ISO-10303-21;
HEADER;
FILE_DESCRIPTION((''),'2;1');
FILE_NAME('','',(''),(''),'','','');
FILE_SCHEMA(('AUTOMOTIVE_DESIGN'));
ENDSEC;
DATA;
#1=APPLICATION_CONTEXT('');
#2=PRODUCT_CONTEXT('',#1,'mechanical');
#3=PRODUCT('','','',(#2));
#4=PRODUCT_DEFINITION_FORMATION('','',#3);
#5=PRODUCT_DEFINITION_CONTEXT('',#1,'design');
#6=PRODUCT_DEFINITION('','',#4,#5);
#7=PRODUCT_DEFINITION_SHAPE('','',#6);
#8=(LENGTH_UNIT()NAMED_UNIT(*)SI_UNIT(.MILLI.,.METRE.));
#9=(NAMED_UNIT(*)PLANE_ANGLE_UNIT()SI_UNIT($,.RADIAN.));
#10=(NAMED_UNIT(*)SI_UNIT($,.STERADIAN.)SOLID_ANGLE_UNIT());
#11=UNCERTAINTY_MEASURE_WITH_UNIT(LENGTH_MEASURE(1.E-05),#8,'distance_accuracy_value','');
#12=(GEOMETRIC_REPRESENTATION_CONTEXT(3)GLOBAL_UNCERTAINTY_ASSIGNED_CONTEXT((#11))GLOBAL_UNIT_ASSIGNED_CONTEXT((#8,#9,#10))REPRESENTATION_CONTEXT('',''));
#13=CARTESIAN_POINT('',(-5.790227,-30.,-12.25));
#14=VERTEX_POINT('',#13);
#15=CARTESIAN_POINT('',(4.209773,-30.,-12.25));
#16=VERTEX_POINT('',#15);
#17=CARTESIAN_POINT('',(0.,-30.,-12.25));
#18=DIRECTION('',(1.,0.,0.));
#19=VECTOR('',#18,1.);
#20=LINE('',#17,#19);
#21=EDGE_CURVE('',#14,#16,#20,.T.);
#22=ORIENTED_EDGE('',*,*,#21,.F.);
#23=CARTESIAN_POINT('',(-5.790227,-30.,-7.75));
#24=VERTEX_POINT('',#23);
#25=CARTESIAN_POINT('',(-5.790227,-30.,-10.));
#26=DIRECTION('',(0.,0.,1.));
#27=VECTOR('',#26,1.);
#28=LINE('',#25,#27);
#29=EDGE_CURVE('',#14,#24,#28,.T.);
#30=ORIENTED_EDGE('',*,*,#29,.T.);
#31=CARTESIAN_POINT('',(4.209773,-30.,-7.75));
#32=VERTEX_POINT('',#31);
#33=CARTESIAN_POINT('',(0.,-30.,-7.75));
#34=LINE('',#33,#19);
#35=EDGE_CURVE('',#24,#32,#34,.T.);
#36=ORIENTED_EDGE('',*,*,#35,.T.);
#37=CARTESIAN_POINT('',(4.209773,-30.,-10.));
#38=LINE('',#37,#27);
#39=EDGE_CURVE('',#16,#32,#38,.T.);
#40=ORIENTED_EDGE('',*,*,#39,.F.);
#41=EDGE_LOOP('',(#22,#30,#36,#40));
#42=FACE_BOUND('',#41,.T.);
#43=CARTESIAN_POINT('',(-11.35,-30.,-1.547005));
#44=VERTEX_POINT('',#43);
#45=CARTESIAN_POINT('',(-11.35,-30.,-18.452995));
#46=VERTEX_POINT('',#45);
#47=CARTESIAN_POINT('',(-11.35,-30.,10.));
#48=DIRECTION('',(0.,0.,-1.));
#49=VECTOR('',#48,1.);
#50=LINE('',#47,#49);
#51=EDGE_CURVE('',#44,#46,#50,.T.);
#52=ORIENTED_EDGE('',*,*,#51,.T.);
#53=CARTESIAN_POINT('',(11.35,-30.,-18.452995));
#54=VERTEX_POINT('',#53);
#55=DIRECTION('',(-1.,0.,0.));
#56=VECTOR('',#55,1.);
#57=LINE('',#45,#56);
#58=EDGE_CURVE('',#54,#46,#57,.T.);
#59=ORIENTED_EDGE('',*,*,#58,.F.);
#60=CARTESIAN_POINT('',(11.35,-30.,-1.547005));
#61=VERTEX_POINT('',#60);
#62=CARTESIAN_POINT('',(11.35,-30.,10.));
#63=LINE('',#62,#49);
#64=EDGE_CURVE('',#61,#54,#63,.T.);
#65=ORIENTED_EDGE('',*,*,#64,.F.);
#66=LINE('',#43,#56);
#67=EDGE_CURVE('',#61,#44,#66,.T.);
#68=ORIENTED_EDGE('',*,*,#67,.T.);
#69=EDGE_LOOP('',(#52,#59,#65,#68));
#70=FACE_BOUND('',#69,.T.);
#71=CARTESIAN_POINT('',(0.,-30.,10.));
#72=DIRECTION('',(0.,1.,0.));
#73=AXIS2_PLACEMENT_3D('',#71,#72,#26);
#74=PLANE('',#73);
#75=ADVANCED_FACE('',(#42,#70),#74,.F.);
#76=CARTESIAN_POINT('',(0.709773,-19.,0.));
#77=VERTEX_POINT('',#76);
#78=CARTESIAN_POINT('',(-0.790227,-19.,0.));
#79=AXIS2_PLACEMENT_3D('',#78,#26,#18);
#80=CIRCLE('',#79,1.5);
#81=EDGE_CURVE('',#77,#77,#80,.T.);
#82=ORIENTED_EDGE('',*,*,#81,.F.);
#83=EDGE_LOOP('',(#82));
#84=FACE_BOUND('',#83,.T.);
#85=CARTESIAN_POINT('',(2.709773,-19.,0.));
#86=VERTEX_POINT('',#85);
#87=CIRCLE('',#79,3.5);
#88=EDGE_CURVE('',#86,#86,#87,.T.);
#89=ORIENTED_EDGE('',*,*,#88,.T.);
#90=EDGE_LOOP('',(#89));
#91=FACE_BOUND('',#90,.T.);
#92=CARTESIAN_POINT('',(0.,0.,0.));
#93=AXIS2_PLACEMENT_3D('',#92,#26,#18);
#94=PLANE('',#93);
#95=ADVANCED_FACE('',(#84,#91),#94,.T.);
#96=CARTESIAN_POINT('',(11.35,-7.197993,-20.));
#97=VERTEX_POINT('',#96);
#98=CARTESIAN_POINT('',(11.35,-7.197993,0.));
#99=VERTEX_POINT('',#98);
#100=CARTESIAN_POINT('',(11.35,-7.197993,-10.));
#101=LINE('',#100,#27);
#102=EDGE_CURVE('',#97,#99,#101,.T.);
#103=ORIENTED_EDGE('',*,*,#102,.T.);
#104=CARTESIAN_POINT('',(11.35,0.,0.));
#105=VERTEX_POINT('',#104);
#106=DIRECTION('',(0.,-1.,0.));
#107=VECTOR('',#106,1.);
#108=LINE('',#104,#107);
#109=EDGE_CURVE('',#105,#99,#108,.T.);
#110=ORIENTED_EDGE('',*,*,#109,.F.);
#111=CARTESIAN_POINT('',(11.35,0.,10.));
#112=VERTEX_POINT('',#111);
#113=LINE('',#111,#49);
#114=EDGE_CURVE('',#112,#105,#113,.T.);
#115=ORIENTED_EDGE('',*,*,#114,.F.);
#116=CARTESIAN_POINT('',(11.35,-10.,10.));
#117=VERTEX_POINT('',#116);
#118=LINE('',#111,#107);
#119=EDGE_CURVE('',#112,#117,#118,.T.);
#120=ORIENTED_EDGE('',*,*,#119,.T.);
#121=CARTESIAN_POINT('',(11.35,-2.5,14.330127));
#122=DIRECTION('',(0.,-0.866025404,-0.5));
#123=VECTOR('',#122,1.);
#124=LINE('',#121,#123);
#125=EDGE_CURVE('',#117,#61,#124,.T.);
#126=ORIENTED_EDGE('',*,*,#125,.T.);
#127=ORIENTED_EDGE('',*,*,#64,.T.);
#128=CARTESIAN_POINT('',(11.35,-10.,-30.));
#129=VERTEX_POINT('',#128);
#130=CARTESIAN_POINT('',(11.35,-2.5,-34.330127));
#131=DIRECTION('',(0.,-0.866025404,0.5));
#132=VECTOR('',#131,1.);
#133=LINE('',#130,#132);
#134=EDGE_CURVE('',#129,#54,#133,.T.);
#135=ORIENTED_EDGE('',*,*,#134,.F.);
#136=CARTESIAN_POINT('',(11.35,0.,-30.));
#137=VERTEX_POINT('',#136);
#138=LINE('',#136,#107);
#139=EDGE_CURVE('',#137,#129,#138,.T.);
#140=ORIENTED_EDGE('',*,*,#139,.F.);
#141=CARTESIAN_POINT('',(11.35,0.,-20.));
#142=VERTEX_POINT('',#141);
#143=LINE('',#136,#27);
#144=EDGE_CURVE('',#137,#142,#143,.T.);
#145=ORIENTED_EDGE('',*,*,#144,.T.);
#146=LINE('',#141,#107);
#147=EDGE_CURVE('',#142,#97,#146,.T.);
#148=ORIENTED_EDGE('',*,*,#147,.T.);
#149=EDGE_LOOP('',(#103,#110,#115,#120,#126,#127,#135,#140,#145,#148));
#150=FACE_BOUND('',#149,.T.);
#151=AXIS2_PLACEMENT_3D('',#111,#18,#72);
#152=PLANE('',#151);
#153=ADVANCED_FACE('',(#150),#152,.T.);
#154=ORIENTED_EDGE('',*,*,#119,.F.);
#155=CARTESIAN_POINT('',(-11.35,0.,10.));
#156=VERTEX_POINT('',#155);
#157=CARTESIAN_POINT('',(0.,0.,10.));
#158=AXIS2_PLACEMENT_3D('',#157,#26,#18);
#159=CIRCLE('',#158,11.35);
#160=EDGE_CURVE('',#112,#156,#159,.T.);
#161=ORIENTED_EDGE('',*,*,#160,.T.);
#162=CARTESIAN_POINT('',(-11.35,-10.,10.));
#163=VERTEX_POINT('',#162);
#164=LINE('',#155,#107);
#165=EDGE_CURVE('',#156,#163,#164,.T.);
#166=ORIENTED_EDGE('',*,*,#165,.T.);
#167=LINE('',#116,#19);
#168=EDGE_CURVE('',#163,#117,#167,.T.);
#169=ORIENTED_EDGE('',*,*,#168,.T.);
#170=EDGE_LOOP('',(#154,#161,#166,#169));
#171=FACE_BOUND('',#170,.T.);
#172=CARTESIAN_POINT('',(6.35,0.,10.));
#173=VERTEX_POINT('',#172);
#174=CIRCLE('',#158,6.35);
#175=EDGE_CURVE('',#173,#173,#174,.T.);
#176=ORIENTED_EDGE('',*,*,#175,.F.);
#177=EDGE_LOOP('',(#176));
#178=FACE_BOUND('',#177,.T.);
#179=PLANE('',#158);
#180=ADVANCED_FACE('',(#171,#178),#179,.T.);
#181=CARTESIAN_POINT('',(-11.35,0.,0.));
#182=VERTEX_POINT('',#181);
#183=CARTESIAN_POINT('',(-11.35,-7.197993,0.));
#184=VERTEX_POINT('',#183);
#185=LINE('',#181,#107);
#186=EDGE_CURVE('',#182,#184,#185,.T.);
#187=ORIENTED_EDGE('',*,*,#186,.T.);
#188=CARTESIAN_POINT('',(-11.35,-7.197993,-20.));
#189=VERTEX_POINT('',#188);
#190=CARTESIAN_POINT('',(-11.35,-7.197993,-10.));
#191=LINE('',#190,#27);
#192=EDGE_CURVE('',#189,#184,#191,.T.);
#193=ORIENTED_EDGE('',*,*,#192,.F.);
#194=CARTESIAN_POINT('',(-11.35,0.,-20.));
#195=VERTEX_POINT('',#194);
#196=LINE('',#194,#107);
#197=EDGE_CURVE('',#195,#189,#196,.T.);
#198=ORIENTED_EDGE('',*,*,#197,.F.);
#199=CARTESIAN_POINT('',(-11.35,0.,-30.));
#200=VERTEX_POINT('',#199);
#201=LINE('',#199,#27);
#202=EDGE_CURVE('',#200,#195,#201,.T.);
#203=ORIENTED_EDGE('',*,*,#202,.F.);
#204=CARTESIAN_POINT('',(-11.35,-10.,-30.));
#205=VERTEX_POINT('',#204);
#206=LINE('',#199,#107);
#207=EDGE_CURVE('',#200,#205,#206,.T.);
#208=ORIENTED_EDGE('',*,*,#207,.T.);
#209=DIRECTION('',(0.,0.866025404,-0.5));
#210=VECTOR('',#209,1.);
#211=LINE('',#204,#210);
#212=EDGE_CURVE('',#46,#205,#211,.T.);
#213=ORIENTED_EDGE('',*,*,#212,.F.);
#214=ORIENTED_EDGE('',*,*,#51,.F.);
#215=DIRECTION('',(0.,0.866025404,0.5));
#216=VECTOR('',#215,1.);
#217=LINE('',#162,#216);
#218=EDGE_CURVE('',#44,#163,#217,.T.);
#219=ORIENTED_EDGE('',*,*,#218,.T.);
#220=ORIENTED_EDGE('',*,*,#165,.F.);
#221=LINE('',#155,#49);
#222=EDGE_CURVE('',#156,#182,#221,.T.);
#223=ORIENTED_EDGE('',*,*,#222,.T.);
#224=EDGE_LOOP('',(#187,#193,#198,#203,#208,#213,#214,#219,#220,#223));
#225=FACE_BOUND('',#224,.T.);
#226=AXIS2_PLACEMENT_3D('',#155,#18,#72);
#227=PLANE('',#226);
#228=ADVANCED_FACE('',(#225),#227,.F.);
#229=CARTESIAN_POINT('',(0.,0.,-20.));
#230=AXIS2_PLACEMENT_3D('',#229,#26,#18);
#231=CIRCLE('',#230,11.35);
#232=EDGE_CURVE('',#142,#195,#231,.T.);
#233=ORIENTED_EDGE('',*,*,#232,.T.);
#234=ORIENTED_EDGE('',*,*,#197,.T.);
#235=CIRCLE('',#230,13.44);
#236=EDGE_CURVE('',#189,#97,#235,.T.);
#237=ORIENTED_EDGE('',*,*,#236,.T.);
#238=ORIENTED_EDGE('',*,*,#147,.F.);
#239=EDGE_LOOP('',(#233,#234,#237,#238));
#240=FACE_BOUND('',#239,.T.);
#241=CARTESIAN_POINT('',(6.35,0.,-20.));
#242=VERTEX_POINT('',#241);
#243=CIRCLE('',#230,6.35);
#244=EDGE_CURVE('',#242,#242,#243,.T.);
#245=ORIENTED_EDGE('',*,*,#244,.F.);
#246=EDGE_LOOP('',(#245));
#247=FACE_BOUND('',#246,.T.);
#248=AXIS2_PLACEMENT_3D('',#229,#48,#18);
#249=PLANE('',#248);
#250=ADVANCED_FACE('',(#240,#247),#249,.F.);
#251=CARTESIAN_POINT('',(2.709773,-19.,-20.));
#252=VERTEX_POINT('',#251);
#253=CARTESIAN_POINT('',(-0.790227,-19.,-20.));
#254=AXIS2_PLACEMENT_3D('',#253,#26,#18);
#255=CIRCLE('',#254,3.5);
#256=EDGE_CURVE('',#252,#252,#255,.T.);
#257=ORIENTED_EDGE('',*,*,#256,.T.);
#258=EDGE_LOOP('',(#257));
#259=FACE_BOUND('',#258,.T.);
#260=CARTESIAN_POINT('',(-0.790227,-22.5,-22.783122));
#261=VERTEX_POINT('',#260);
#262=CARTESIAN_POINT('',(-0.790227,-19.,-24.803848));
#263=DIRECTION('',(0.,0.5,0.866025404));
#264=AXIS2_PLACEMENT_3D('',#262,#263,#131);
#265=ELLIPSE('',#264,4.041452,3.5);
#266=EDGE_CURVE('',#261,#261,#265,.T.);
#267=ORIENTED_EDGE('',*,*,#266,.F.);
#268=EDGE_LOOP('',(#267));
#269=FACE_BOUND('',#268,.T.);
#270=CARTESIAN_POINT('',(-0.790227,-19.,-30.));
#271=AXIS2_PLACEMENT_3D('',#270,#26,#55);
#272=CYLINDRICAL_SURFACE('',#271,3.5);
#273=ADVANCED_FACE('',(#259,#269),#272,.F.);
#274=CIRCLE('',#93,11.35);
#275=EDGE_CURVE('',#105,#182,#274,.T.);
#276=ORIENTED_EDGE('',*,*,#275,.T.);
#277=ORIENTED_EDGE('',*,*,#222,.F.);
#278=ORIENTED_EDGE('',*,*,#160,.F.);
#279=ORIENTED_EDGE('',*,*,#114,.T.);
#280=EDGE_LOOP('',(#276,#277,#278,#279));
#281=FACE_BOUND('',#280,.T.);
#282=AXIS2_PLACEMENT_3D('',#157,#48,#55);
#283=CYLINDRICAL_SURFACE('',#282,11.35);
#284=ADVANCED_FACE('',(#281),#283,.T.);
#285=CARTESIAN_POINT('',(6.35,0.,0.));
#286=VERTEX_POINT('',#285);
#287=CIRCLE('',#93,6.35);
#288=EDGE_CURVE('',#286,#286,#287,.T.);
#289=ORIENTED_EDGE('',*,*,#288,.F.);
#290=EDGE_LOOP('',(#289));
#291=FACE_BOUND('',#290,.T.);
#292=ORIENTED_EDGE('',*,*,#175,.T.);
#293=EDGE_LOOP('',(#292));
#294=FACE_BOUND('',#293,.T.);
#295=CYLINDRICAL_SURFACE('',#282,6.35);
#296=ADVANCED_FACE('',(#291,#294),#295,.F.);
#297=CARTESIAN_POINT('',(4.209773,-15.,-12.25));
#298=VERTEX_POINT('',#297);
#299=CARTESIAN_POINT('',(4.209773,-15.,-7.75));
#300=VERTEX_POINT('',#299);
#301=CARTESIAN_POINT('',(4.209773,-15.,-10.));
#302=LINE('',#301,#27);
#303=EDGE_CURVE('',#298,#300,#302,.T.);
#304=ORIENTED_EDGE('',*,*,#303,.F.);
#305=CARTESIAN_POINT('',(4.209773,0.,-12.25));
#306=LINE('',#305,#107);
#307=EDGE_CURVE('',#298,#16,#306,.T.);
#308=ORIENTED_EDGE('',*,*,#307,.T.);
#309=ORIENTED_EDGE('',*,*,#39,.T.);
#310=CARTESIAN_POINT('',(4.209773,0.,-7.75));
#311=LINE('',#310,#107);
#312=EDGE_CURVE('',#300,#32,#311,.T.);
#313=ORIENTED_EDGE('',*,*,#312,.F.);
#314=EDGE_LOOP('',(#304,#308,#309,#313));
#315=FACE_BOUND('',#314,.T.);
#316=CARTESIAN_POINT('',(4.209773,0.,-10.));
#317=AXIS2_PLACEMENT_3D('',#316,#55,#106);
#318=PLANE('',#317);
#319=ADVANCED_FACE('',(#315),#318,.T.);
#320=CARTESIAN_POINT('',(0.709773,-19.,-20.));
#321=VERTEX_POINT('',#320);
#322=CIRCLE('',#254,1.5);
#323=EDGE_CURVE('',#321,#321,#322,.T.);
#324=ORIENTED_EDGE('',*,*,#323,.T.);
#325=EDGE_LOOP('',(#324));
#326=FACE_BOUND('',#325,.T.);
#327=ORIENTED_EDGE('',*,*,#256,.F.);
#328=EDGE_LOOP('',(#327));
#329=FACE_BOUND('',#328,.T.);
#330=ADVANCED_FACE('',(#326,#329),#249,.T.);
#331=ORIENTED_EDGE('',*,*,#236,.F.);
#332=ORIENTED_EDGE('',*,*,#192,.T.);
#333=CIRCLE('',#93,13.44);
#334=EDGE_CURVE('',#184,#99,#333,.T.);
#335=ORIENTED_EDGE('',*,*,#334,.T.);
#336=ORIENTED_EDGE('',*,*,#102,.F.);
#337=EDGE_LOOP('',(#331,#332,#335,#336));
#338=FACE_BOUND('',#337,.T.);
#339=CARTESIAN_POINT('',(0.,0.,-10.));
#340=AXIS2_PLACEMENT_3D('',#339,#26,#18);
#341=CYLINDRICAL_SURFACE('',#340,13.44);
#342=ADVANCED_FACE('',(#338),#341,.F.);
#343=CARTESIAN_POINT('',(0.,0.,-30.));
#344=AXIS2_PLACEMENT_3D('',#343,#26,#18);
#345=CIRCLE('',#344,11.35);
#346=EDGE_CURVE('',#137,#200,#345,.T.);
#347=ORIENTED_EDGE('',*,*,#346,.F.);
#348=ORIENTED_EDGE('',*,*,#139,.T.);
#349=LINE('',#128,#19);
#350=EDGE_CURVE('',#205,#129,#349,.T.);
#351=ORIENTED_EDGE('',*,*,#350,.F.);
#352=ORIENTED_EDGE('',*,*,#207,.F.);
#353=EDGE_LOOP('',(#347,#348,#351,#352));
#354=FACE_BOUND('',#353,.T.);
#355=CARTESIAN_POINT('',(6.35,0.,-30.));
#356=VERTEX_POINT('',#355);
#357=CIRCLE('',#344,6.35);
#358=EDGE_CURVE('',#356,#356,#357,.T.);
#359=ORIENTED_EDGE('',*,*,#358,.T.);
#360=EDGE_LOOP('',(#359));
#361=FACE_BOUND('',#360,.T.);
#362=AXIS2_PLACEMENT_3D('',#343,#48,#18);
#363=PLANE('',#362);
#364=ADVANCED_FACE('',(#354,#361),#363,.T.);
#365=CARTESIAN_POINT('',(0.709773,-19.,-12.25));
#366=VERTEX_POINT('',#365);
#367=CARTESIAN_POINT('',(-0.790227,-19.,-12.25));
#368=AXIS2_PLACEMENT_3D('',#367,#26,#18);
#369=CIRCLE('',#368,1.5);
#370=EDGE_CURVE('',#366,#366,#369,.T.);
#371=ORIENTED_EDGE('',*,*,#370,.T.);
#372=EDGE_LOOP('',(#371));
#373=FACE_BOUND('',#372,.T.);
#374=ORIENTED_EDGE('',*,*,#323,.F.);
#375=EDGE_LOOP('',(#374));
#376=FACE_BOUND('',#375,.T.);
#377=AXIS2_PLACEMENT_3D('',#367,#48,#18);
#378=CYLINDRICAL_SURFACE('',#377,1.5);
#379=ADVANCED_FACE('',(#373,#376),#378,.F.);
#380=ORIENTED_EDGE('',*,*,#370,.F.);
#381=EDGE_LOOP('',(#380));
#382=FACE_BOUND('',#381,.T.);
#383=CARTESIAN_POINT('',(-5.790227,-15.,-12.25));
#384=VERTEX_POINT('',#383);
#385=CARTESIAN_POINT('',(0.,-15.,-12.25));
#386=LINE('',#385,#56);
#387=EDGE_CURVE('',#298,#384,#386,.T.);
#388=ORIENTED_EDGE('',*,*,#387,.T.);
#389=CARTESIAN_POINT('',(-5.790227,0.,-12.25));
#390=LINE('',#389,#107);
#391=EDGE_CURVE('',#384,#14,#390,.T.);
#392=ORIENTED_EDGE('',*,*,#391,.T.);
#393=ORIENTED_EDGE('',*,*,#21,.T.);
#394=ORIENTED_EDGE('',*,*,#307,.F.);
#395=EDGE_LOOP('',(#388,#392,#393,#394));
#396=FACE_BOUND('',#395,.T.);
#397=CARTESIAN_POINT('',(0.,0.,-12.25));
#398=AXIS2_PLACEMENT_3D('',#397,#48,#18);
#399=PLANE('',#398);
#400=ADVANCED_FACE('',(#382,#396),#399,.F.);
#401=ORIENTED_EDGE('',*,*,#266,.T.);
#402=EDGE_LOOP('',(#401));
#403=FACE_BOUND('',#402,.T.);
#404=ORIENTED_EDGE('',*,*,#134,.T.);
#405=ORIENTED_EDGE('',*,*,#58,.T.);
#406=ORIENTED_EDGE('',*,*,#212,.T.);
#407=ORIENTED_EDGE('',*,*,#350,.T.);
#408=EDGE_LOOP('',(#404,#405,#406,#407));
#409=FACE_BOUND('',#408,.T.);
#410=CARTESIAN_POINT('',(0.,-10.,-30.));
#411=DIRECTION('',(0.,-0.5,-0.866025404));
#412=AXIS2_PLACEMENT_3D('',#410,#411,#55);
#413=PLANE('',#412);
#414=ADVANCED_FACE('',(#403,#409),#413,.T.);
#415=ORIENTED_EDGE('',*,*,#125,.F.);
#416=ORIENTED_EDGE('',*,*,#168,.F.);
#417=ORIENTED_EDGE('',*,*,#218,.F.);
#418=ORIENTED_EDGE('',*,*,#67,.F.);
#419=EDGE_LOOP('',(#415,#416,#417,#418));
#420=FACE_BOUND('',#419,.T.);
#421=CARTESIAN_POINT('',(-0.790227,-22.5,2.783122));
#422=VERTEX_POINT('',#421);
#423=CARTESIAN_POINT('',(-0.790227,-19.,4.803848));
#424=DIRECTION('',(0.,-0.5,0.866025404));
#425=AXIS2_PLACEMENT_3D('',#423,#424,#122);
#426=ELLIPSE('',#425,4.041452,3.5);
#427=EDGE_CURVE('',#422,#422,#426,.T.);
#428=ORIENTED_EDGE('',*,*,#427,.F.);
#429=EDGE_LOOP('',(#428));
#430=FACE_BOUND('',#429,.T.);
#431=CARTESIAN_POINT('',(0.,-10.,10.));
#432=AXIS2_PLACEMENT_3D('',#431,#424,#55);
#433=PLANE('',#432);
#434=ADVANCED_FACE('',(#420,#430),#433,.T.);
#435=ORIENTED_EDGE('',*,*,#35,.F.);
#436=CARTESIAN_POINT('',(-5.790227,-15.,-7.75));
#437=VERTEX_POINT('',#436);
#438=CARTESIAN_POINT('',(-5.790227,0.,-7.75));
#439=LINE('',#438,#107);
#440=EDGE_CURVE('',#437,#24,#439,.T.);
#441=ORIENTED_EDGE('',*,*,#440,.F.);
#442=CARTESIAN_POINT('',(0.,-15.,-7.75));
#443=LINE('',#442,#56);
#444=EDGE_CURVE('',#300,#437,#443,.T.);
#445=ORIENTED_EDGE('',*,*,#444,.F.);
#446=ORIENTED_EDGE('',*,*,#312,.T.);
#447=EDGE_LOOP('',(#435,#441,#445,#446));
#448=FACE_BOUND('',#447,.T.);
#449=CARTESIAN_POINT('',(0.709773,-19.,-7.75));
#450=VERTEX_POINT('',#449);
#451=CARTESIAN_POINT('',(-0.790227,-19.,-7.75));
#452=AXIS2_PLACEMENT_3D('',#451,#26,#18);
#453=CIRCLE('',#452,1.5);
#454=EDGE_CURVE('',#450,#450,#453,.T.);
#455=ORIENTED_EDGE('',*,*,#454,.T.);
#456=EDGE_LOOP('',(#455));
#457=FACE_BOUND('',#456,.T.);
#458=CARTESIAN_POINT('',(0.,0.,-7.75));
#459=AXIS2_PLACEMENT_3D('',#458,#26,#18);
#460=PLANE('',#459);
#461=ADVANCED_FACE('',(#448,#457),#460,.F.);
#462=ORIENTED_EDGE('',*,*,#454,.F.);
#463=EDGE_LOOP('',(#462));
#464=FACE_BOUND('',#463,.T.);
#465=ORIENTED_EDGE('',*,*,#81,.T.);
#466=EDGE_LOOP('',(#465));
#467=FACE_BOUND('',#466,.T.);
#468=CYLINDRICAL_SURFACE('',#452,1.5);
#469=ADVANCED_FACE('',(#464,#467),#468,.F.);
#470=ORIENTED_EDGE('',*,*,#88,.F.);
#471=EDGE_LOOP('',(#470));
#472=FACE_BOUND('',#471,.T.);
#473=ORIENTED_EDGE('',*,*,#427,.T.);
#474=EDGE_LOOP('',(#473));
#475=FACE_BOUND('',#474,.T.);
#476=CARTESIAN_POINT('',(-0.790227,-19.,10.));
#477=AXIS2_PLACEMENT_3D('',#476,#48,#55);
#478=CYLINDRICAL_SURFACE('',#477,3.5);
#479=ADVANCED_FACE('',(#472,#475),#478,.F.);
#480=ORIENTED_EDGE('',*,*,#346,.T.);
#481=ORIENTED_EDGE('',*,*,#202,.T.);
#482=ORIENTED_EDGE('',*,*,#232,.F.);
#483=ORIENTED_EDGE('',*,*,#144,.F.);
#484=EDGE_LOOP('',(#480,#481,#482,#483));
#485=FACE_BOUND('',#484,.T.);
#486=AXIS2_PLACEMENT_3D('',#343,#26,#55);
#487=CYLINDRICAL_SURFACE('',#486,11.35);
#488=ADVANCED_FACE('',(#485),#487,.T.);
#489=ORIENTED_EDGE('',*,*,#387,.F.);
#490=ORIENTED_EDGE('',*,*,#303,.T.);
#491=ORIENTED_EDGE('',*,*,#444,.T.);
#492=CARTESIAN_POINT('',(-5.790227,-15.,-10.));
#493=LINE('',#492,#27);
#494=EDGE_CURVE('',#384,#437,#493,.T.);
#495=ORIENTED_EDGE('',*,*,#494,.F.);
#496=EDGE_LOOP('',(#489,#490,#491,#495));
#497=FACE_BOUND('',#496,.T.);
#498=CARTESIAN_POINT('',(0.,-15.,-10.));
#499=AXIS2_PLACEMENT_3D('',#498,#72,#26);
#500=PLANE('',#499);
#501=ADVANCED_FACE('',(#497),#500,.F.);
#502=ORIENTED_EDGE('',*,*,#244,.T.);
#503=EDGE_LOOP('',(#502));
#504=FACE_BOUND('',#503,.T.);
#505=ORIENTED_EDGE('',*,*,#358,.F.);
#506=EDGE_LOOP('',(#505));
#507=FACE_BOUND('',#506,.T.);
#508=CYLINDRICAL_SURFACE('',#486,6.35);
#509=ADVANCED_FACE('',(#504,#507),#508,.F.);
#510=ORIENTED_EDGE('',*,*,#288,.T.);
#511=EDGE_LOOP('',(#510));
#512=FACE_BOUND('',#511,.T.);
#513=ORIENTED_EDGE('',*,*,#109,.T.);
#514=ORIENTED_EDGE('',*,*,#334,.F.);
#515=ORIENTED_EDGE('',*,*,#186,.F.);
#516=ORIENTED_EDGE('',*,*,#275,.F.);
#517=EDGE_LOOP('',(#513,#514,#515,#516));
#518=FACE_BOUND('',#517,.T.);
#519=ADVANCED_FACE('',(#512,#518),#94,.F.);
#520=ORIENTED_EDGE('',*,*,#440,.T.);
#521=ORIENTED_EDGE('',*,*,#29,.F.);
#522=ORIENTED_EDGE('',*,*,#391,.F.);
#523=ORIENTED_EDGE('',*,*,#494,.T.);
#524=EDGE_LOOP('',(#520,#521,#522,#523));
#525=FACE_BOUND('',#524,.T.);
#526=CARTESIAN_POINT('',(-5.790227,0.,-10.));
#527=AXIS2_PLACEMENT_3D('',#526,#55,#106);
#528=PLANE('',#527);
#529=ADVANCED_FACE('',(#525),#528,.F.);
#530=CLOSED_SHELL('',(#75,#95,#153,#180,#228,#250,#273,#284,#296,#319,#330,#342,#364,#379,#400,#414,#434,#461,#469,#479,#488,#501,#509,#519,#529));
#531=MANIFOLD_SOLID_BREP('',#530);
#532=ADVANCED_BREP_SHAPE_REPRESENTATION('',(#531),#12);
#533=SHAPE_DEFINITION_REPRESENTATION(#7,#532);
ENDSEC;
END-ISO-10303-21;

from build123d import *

# Parameters (mm, degrees)
SKETCH2_R           = 6.35
SKETCH2_R_2         = 3.5
BOSS_EXTRUDE1_DEPTH = 10
BOSS_EXTRUDE2_DEPTH = 10
SKETCH2_4_W         = 10
SKETCH2_4_H         = 15
SKETCH2_4_R         = 1.5
BOSS_EXTRUDE3_DEPTH = 7.75
CHAMFER1_SIZE       = 20
CHAMFER1_SIZE_2     = 11.547005384


with BuildPart() as part:
    # Sketch2 → Boss-Extrude1 (new body)
    with BuildSketch(Plane.XY):
        with BuildLine():
            ThreePointArc((11.35, 0), (0, 11.35), (-11.35, 0))
            Line((-11.35, 0), (-11.35, -30))
            Line((-11.35, -30), (11.35, -30))
            Line((11.35, -30), (11.35, 0))
        make_face()
        Circle(SKETCH2_R, mode=Mode.SUBTRACT)
        with Locations((-0.790227169, -19)):
            Circle(SKETCH2_R_2, mode=Mode.SUBTRACT)
    extrude(amount=BOSS_EXTRUDE1_DEPTH)

    # Sketch2<3> → Boss-Extrude2 (add)
    with BuildSketch(Plane.XY):
        with BuildLine():
            ThreePointArc((11.35, -7.197992776), (0, -13.44), (-11.35, -7.197992776))
            Line((-11.35, -7.197992776), (-11.35, -30))
            Line((-11.35, -30), (-5.790227169, -30))
            Line((-5.790227169, -30), (-5.790227169, -15))
            Line((-5.790227169, -15), (4.209772831, -15))
            Line((4.209772831, -15), (4.209772831, -30))
            Line((4.209772831, -30), (11.35, -30))
            Line((11.35, -30), (11.35, -7.197992776))
        make_face()
    extrude(amount=-BOSS_EXTRUDE2_DEPTH)

    # Sketch2<4> → Boss-Extrude3 (add)
    with BuildSketch(Plane.XY):
        with Locations((-0.790227169, -22.5)):
            Rectangle(SKETCH2_4_W, SKETCH2_4_H)
        with Locations((-0.790227169, -19)):
            Circle(SKETCH2_4_R, mode=Mode.SUBTRACT)
    extrude(amount=-BOSS_EXTRUDE3_DEPTH)

    # Chamfer1
    # the kernel refuses this chamfer: 20, 11.547005384 mm, written as the material it takes off along each edge
    with BuildSketch(Plane(origin=(-63.091715093, -30, 10), x_dir=(0, 0.9998132206222079, 0.019326765612700723), z_dir=(1, 0, 0))) as chamfer1_piece_1:
        Polygon((CHAMFER1_SIZE * 0.999813220622, -CHAMFER1_SIZE * 0.0193267656127), (-CHAMFER1_SIZE_2 * 0.0193267656124, -CHAMFER1_SIZE_2 * 0.999813220604), (0, 0), align=None)
    extrude(amount=126.183430186, mode=Mode.SUBTRACT)

    # Mirror1: part across plane


with BuildPart() as part_1:
    add(part.part)
    add(part.part.mirror(Plane.XY.offset(-10)))


solid = part_1.part
